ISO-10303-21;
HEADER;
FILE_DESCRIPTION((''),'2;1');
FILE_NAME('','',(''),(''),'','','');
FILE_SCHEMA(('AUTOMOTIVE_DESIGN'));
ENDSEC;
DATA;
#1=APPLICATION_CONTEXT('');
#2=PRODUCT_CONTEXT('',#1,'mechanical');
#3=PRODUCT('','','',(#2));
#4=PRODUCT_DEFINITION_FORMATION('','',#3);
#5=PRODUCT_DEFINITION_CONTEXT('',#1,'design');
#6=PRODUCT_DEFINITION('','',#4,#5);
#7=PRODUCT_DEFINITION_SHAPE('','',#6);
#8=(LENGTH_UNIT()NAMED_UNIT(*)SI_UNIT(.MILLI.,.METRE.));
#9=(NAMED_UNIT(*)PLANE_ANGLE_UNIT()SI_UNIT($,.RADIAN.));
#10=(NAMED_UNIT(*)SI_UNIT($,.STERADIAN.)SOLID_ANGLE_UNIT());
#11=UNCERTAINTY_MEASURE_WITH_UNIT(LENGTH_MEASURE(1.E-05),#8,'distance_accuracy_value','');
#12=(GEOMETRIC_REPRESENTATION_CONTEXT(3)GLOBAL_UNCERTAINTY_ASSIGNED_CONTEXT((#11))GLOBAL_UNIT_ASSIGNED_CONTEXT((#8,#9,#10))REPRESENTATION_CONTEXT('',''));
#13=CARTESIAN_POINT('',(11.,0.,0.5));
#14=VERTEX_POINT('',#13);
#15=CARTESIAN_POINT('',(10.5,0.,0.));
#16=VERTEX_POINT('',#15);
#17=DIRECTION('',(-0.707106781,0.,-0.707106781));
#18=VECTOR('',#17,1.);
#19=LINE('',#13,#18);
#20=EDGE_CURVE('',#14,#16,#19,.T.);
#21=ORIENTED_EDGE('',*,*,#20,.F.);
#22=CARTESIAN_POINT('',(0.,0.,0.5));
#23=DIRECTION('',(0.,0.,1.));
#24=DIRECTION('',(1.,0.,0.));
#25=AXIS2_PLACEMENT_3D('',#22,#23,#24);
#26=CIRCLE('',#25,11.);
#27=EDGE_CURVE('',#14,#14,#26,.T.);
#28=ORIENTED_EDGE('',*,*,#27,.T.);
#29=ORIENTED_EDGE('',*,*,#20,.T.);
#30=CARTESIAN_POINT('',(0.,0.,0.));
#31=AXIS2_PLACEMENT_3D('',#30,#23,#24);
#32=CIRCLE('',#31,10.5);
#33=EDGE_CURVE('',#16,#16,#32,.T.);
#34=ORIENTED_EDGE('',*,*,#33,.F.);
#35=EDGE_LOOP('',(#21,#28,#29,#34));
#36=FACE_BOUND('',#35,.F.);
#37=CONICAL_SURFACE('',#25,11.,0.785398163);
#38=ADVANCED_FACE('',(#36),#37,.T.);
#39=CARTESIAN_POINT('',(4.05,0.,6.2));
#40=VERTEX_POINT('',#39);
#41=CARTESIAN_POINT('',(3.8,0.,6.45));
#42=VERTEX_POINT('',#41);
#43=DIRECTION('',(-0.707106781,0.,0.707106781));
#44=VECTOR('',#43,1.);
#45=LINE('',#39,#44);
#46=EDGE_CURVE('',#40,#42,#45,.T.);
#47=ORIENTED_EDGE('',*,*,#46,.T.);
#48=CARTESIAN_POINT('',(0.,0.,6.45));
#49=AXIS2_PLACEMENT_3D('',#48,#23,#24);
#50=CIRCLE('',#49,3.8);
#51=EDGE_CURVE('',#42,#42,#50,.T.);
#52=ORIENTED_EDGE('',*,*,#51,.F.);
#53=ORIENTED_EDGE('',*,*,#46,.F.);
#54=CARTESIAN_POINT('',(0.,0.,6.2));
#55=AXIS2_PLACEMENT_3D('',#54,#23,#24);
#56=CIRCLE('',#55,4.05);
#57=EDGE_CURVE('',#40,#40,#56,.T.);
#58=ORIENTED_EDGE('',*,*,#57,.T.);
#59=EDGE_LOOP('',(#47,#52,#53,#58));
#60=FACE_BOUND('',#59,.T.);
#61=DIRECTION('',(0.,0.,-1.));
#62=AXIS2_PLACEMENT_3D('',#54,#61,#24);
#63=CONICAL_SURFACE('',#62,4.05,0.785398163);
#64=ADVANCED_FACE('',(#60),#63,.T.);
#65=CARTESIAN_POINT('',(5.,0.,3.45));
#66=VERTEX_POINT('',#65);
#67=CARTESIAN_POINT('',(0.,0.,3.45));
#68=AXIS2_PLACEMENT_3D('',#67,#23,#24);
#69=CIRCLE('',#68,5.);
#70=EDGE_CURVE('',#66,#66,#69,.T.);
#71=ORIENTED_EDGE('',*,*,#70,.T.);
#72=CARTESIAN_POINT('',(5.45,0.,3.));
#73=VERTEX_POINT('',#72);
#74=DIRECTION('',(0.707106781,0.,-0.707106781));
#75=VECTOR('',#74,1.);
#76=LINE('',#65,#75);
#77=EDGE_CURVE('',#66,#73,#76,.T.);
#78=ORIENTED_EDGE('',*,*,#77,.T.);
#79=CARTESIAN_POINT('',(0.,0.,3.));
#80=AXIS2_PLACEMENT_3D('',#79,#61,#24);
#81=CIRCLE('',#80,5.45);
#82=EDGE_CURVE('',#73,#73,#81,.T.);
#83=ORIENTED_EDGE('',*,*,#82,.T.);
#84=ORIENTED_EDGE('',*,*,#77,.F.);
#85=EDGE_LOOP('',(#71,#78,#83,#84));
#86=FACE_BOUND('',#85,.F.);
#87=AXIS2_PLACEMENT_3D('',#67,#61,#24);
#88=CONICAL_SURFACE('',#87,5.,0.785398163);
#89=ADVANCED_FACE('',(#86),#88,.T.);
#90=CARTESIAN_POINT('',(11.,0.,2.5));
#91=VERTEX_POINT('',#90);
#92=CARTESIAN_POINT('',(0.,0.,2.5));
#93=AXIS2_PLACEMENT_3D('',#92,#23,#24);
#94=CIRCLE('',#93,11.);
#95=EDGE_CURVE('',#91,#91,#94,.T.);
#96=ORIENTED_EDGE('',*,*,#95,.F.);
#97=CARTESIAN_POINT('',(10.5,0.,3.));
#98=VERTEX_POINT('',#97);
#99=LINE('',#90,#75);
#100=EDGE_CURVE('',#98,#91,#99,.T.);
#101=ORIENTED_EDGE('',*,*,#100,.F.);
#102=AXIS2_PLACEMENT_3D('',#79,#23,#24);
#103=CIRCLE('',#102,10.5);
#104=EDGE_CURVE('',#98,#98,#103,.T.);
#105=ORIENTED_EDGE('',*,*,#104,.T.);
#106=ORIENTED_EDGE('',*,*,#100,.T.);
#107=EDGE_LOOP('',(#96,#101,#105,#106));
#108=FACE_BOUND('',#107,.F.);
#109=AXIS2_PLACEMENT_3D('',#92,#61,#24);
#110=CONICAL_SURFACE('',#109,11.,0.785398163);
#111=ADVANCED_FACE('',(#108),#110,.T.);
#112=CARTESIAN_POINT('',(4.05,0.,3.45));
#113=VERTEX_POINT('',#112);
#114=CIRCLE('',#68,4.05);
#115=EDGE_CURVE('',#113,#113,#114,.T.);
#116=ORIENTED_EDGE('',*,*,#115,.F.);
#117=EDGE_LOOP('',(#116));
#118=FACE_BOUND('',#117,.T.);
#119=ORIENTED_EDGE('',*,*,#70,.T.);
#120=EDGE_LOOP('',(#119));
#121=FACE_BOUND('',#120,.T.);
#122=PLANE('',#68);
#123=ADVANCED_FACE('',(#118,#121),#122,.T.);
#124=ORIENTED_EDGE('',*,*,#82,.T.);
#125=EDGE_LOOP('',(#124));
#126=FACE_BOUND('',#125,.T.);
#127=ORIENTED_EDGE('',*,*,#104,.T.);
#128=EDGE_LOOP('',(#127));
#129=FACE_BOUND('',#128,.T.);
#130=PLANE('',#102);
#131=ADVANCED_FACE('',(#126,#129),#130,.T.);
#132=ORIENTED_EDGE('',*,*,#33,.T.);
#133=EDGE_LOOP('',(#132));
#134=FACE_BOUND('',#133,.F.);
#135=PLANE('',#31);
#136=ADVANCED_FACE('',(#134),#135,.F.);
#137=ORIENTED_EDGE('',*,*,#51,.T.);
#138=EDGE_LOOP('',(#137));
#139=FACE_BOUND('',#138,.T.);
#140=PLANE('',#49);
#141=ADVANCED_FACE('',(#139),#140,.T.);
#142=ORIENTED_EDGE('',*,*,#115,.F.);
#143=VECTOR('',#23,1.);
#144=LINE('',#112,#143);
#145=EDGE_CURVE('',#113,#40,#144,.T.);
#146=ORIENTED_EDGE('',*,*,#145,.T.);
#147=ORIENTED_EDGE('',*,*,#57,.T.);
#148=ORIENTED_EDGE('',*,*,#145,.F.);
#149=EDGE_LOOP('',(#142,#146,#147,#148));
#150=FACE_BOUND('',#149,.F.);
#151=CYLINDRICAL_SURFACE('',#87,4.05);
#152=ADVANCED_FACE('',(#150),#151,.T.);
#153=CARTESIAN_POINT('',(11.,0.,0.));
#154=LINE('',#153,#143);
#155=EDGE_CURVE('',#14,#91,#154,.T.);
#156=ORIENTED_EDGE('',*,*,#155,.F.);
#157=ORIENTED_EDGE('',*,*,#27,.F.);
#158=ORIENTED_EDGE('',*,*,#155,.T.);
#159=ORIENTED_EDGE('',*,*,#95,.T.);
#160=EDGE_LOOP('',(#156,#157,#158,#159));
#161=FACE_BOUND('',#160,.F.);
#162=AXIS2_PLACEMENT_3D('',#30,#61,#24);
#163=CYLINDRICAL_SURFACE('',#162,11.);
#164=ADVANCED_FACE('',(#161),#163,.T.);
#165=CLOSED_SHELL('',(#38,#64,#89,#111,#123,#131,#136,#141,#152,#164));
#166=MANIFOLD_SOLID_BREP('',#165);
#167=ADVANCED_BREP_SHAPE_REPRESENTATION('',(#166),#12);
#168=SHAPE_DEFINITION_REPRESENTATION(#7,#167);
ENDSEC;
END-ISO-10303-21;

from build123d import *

# Parameters (mm, degrees)
F0_R     = 11
F1_DEPTH = 3
F2_R     = 5.5
F3_DEPTH = 0.45
F4_R     = 4.05
F5_DEPTH = 3
F6_SIZE  = 0.25
F8_SIZE  = 0.5


# Not quite as in the source:
# - a fillet or chamfer that OpenCascade refuses, or shapes differently, is made with other operations: its cross-section is extruded or revolved along the edge and cut away or added


with BuildPart() as f1:
    # F0 (on Top) → F1 (new body)
    with BuildSketch(Plane.XY):
        Circle(F0_R)
    extrude(amount=F1_DEPTH)

    # F2 (on face) → F3 (join)
    with BuildSketch(Plane.XY.offset(3)):
        Circle(F2_R)
    extrude(amount=F3_DEPTH)

    # F4 (on face) → F5 (join)
    with BuildSketch(Plane.XY.offset(3.45)):
        Circle(F4_R)
    extrude(amount=F5_DEPTH)

    # F6
    f6_edges = [f1.edges().sort_by_distance(p)[0] for p in [
        (-4.05, 0, 6.45),
    ]]
    chamfer(f6_edges, length=F6_SIZE)

    # F7: chamfer of 0.5 on 1 edges, made by hand


with BuildPart() as f7_tool2:
    # F7_s3 → F7_t4 (revolve)
    with BuildSketch(Plane.XZ):
        Polygon((5, 3.45), (5.5, 2.95), (5.5, 3.45), align=None)
    revolve(axis=Axis((0, 0, 3.45), (0, 0, 1)))

    split(bisect_by=Plane.XY.offset(3), keep=Keep.TOP)


with BuildPart() as f1_1:
    add(f1.part)

    # F7_t1: cut F7_tool2
    add(f7_tool2.part, mode=Mode.SUBTRACT)

    # F8
    f8_edges = [f1_1.edges().sort_by_distance(p)[0] for p in [
        (-11, 0, 0),
        (-11, 0, 3),
    ]]
    chamfer(f8_edges, length=F8_SIZE)


solid = f1_1.part
